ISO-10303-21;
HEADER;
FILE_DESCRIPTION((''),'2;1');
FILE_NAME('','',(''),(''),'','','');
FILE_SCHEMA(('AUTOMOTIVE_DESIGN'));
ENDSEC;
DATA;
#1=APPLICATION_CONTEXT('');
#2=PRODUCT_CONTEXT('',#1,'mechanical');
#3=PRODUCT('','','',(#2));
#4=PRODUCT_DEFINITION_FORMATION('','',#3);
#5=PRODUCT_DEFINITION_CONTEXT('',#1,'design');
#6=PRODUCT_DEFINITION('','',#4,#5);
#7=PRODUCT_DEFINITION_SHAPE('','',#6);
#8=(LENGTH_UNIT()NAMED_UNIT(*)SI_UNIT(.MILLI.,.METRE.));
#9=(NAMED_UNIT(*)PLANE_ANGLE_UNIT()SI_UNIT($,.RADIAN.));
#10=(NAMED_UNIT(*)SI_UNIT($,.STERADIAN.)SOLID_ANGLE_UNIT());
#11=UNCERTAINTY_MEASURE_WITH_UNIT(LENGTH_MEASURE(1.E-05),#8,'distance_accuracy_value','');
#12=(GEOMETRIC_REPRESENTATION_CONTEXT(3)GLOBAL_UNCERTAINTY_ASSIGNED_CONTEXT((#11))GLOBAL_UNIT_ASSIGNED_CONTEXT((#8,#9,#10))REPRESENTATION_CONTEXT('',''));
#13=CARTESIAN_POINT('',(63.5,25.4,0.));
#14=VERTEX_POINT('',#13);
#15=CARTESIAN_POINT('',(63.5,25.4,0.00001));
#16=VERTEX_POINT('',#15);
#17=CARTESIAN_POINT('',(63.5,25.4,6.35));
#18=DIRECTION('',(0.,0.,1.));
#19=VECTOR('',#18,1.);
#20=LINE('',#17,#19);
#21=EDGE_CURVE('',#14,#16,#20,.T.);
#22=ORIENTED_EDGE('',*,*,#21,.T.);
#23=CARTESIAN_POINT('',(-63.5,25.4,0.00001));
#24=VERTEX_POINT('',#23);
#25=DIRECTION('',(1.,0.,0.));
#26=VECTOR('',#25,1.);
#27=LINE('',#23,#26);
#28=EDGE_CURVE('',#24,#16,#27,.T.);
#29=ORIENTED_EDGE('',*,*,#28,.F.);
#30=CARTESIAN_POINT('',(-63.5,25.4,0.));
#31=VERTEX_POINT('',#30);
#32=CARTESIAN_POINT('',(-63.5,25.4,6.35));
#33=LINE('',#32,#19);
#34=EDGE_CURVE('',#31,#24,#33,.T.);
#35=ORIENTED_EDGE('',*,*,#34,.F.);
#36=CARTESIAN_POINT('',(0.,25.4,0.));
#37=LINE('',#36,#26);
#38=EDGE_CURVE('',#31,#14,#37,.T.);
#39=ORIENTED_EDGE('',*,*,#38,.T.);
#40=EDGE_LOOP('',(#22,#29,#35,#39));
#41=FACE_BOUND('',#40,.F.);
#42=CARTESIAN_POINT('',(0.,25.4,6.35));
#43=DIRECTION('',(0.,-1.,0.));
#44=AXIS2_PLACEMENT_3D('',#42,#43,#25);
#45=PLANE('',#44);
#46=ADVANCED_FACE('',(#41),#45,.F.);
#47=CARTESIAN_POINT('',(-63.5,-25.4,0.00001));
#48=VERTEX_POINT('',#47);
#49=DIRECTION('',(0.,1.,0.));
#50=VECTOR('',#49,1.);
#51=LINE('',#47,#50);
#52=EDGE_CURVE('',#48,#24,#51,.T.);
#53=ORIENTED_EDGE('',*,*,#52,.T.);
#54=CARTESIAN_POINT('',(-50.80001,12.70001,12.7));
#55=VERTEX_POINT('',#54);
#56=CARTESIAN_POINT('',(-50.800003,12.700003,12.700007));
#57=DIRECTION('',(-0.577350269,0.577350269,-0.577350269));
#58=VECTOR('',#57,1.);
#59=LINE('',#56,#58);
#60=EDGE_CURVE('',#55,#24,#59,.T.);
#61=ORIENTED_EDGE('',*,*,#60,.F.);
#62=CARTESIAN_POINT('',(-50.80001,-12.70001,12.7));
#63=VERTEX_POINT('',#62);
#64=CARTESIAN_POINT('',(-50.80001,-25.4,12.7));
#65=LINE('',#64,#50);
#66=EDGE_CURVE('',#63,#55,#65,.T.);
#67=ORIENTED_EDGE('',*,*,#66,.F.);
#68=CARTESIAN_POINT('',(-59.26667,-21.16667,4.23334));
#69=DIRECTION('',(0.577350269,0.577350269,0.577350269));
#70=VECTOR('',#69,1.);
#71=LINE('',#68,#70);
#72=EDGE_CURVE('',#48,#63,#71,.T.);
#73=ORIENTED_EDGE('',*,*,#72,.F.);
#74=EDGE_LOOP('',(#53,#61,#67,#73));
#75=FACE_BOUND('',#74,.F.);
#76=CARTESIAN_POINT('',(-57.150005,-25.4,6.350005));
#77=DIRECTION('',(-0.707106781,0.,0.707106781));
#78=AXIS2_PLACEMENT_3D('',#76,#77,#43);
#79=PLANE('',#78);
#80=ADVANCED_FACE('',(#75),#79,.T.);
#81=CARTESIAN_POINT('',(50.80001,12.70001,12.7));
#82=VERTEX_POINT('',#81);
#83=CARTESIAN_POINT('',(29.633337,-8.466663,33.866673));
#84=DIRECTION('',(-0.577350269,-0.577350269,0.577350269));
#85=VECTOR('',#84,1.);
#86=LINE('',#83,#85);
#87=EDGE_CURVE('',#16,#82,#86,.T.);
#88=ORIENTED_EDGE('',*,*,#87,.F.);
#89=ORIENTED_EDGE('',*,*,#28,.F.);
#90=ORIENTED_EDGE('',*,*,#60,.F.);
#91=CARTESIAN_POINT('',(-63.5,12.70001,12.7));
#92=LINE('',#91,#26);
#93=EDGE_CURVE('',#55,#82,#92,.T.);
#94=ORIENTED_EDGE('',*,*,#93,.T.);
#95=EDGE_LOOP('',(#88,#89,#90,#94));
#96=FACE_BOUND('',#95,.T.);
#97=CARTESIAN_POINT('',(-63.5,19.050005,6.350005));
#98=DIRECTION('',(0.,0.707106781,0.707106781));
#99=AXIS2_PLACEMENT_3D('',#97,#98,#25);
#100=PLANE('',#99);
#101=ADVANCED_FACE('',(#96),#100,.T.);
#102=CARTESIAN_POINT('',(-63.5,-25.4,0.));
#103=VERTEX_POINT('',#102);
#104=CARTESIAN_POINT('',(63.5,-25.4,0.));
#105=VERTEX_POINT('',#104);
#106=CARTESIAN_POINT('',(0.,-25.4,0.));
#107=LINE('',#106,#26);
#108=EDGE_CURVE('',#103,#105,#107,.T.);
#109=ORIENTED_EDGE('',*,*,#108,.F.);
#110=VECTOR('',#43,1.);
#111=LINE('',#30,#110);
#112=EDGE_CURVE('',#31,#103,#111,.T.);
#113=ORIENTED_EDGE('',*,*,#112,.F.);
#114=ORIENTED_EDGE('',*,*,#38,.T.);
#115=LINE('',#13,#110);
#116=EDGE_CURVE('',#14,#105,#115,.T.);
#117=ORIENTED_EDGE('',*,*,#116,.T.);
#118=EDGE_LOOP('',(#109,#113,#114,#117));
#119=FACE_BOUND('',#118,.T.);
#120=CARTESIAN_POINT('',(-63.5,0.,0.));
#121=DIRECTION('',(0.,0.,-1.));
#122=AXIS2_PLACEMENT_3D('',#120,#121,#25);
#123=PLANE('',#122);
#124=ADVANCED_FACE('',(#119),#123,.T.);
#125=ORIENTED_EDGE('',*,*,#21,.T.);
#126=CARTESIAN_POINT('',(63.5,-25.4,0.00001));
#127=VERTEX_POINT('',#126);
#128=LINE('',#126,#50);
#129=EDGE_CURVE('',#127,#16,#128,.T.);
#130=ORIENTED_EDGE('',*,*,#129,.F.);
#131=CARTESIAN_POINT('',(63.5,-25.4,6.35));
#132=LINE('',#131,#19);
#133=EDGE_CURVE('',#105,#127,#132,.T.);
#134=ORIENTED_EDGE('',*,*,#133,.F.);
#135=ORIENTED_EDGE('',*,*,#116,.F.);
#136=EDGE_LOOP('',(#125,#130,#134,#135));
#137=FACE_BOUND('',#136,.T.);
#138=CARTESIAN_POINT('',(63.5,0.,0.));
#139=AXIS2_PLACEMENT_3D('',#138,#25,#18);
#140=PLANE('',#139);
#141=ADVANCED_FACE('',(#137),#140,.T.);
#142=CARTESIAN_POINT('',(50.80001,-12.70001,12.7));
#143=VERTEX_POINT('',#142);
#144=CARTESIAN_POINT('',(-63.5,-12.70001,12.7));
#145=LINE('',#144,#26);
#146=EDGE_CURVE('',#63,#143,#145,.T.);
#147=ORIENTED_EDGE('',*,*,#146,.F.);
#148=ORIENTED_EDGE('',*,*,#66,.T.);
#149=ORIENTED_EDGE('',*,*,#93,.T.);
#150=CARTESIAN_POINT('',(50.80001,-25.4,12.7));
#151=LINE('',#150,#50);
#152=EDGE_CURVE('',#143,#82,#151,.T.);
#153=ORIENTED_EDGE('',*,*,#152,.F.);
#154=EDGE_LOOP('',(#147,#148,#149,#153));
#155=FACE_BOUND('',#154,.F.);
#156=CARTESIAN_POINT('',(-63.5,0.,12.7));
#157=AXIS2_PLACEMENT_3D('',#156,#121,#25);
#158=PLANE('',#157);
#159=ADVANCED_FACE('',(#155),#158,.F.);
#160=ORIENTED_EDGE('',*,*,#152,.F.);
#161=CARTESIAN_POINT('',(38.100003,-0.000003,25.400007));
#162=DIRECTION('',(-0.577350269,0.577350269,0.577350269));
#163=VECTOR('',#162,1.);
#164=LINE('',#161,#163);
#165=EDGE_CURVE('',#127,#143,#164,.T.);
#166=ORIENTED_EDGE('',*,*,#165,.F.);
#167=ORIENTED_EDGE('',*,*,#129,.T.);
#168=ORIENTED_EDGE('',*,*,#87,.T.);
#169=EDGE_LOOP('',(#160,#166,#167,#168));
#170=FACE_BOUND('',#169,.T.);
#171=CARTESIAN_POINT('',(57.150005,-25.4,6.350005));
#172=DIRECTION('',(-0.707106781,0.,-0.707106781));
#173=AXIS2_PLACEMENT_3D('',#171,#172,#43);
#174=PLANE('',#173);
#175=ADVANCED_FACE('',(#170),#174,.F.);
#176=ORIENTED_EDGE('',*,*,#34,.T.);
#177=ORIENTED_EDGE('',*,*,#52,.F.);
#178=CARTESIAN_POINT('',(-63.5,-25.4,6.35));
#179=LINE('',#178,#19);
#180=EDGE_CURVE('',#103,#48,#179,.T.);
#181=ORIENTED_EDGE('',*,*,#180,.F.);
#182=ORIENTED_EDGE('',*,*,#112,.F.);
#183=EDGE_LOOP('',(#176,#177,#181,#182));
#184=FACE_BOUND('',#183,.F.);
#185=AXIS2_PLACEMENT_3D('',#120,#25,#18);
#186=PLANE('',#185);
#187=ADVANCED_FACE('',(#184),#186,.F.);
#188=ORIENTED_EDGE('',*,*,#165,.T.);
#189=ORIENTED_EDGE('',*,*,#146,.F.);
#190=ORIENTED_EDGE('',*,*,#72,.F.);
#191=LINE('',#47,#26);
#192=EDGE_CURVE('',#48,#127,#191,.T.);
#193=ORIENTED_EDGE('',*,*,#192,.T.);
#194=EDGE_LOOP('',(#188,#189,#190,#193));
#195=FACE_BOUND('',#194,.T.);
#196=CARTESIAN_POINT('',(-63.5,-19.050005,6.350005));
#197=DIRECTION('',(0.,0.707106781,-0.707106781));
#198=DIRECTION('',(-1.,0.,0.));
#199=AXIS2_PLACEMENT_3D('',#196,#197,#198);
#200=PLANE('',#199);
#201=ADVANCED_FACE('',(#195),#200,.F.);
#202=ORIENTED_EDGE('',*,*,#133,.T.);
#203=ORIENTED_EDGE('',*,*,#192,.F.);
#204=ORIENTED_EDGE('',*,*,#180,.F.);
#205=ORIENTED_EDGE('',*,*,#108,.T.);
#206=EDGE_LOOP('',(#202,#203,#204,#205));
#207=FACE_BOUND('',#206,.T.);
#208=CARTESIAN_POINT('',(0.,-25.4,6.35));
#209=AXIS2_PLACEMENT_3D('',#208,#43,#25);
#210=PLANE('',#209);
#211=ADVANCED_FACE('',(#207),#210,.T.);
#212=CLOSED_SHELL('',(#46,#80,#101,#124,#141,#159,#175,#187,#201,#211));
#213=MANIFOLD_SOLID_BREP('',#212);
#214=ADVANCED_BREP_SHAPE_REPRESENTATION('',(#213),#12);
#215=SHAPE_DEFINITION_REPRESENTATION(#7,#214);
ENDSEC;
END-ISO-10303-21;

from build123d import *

# Parameters (mm, degrees)
F0_W     = 127
F0_H     = 12.7
F1_DEPTH = 25.4
F2_SIZE2 = 12.69999
F2_SIZE  = 12.69999


# Not quite as in the source:
# - a fillet or chamfer is up to 0.001 mm smaller than in the source, because OpenCascade refuses the exact size


with BuildPart() as f1:
    # F0 (on Front) → F1 (new body, symmetric)
    with BuildSketch(Plane.XZ):
        with Locations((0, 6.35)):
            Rectangle(F0_W, F0_H)
    extrude(amount=F1_DEPTH, both=True)

    # F2 (size 12.7 and 12.7 in the source; OpenCascade refuses exactly that, so slightly less here)
    f2_edges = [f1.edges().sort_by_distance(p)[0] for p in [
        (63.5, 0, 12.7),
        (0, 25.4, 12.7),
        (-63.5, 0, 12.7),
        (0, -25.4, 12.7),
    ]]
    chamfer(f2_edges, length=F2_SIZE, length2=F2_SIZE2)


solid = f1.part
